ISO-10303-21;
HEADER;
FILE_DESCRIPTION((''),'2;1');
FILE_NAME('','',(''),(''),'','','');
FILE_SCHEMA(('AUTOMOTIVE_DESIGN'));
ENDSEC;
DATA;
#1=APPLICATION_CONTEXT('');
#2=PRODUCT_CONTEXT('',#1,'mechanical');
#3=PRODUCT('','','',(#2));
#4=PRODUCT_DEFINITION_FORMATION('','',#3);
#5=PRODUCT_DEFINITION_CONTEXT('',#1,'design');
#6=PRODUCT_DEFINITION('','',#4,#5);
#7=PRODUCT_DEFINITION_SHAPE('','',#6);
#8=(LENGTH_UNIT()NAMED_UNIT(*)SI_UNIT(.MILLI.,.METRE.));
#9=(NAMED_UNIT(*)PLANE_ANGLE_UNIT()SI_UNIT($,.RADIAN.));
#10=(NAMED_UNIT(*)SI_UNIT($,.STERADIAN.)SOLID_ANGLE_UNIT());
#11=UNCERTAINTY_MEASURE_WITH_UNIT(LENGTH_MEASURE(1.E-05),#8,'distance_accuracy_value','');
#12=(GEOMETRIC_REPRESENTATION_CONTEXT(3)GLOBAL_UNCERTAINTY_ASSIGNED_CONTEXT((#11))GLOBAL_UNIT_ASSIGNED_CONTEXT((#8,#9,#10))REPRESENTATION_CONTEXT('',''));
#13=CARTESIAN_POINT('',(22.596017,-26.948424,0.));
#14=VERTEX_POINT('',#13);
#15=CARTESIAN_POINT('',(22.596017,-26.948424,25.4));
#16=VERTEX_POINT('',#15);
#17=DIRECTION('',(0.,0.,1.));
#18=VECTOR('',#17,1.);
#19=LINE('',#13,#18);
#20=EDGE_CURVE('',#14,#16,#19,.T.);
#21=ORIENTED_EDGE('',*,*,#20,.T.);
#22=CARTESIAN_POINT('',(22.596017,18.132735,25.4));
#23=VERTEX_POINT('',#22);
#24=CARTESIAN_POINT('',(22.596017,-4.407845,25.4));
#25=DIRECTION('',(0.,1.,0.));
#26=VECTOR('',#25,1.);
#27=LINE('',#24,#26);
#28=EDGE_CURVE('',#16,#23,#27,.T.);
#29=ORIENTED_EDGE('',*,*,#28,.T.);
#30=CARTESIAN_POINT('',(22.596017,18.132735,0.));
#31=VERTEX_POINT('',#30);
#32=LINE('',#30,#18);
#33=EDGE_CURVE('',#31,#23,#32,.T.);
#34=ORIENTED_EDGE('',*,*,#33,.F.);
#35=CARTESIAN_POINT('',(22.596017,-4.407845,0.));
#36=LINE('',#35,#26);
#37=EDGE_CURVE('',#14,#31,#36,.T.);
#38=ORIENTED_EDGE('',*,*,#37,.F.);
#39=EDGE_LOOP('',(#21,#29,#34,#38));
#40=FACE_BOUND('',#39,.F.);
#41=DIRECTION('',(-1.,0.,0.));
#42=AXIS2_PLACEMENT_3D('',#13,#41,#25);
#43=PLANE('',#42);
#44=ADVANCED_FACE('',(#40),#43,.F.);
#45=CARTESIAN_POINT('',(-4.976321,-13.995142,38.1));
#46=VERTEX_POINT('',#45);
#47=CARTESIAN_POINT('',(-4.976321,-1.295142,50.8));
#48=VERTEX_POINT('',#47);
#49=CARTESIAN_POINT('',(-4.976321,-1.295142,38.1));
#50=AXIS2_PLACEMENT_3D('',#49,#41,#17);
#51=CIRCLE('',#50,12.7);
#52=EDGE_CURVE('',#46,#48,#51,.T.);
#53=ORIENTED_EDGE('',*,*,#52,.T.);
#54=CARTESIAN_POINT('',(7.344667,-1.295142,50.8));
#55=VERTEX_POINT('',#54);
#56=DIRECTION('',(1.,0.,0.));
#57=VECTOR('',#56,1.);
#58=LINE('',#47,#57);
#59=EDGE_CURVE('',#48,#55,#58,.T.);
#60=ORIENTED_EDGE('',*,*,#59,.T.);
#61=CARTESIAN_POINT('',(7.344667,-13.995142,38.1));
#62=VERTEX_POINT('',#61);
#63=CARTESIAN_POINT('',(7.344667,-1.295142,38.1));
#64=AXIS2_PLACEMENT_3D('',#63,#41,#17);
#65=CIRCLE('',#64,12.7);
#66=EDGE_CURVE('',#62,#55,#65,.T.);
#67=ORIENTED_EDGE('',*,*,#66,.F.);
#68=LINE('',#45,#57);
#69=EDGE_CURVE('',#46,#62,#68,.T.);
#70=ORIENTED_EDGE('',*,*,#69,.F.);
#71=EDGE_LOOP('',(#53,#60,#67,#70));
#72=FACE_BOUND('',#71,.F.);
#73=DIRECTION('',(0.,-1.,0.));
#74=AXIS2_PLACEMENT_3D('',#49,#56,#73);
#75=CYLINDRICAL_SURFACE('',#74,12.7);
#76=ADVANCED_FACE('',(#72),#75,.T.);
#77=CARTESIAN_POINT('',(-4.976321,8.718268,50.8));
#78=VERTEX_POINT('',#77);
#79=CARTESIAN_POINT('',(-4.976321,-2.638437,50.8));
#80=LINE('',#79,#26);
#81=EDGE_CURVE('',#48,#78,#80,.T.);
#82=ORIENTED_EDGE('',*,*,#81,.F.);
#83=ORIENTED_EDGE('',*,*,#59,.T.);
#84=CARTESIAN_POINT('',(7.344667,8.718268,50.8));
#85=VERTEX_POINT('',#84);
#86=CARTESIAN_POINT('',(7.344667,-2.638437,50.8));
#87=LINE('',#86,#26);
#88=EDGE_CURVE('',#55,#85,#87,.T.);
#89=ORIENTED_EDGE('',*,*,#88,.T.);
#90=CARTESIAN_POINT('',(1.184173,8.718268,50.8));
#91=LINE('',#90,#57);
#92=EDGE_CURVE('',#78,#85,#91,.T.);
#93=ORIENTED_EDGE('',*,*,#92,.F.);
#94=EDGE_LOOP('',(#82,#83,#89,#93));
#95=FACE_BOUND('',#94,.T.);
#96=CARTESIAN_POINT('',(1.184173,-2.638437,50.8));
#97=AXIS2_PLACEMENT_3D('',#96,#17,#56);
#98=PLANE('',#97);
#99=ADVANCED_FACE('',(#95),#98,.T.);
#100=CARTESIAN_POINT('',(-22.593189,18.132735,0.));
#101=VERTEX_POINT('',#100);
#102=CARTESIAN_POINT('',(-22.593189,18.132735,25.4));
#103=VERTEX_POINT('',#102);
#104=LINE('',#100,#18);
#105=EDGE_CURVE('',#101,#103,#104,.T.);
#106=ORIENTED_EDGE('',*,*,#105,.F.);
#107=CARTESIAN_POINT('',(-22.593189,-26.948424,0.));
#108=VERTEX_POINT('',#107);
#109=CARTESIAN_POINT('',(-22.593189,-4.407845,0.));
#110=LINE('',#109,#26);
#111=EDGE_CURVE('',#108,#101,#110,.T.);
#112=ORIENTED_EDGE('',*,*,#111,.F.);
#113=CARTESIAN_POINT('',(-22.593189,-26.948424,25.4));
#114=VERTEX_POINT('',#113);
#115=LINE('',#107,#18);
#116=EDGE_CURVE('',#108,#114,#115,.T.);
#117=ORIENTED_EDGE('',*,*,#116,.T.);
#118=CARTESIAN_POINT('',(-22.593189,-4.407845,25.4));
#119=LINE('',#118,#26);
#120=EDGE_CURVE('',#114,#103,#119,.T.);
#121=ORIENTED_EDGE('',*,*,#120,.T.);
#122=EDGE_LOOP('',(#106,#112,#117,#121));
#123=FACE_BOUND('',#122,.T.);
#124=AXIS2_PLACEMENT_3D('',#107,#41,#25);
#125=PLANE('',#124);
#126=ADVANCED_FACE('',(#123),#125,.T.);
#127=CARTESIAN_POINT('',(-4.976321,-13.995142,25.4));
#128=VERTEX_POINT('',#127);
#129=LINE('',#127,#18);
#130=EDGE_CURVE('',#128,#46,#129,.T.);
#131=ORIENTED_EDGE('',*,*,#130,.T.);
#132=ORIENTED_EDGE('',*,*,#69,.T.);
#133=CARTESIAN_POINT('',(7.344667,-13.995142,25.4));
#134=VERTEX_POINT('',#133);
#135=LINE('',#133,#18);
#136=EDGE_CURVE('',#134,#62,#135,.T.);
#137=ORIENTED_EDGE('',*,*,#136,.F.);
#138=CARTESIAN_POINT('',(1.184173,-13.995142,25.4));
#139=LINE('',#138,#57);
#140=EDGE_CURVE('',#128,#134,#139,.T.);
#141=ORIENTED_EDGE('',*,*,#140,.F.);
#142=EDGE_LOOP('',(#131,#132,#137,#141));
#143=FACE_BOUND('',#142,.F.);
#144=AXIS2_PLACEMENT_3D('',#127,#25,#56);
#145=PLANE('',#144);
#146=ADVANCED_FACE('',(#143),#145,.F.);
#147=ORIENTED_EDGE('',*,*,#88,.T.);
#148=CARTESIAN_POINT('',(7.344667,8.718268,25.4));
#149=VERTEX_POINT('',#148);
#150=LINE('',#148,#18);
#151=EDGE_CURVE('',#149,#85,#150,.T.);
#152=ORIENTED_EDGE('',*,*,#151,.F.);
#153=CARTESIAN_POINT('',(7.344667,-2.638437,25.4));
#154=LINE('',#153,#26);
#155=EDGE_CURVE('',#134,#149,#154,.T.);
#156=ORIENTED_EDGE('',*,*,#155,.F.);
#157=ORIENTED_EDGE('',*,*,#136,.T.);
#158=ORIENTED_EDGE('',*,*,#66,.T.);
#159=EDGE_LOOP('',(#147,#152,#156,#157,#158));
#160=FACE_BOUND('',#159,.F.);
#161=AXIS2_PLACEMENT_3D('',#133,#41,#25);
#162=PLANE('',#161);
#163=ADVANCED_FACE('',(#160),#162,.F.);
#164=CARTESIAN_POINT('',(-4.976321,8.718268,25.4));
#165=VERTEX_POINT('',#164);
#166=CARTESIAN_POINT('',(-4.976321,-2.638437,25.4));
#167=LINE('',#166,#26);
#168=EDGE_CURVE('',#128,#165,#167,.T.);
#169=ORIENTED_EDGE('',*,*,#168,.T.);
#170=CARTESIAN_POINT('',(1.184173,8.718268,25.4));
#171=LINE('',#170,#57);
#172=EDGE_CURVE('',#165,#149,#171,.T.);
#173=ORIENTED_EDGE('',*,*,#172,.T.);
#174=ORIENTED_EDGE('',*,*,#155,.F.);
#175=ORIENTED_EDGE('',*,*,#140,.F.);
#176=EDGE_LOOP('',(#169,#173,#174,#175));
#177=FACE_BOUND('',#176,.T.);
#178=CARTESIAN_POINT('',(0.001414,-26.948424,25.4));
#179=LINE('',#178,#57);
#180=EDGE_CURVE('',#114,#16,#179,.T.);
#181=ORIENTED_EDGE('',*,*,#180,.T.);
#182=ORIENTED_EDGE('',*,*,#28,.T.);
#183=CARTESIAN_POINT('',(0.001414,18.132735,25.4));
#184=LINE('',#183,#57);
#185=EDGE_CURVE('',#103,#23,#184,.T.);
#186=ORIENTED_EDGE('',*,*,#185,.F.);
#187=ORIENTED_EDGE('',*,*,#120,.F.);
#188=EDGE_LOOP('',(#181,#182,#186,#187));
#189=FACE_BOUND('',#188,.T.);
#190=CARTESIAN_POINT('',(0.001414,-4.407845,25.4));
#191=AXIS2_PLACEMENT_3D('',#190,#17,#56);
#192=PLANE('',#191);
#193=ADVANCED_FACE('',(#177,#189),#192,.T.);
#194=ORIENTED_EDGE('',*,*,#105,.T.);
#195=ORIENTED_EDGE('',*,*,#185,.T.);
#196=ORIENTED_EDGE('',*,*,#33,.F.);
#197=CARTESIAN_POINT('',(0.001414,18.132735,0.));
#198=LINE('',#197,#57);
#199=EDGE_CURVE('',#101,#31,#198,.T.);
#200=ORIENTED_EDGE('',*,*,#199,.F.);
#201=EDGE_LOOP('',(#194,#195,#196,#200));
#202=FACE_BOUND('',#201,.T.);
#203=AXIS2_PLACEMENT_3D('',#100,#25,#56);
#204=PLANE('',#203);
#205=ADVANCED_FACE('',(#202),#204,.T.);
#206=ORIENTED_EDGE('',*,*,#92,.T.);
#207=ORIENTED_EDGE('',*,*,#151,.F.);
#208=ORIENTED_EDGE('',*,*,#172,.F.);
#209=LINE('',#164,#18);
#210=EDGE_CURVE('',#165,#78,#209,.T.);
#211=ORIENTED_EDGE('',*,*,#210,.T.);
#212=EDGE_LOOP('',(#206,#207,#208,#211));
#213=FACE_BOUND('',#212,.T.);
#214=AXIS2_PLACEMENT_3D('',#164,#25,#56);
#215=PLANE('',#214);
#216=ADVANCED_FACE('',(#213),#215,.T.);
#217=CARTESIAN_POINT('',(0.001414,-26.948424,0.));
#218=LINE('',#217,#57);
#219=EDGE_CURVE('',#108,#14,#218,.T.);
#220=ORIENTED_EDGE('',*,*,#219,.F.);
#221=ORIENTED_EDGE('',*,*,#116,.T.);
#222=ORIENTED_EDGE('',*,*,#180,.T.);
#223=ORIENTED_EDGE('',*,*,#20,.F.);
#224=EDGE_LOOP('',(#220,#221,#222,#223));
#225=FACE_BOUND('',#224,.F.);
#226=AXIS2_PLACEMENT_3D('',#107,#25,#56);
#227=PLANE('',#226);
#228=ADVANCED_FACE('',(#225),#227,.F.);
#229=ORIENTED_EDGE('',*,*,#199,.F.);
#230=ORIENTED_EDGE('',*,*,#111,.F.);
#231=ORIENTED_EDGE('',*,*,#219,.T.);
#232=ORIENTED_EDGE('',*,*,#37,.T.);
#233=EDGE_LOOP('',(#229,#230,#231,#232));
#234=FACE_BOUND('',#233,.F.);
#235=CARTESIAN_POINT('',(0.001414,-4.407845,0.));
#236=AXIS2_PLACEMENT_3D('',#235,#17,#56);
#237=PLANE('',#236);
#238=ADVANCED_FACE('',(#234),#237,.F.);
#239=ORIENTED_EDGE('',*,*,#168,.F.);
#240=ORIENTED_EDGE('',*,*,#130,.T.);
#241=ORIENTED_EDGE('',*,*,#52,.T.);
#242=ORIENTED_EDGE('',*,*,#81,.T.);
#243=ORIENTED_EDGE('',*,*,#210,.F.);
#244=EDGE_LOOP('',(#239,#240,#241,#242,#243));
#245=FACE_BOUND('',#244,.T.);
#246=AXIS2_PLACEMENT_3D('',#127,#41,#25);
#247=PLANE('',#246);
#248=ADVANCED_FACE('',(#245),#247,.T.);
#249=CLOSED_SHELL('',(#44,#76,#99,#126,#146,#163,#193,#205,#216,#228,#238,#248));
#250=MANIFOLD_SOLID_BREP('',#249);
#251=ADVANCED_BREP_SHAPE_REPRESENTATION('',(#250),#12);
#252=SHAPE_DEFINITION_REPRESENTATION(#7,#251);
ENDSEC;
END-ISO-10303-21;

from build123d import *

# Parameters (mm, degrees)
F0_W     = 45.1892055571
F0_H     = 45.0811590999
F1_DEPTH = 25.4
F2_W     = 12.3209874146
F2_H     = 22.7134097368
F3_DEPTH = 25.4
F4_R     = 12.7


# Not quite as in the source:
# - the program builds the solid bodies; features that only make, move or delete a surface that nothing else refers to are left out


with BuildPart() as f1:
    # F0 (on Top) → F1 (new body)
    with BuildSketch(Plane.XY):
        with Locations((0.0014137477, -4.4078445062)):
            Rectangle(F0_W, F0_H)
    extrude(amount=F1_DEPTH)

    # F2 (on face) → F3 (join)
    with BuildSketch(Plane.XY.offset(25.4)):
        with Locations((1.1841731612, -2.6384368539)):
            Rectangle(F2_W, F2_H)
    extrude(amount=F3_DEPTH)

    # F4
    f4_edges = [f1.edges().sort_by_distance(p)[0] for p in [
        (1.184173, -13.995142, 50.8),
    ]]
    fillet(f4_edges, radius=F4_R)


solid = f1.part
